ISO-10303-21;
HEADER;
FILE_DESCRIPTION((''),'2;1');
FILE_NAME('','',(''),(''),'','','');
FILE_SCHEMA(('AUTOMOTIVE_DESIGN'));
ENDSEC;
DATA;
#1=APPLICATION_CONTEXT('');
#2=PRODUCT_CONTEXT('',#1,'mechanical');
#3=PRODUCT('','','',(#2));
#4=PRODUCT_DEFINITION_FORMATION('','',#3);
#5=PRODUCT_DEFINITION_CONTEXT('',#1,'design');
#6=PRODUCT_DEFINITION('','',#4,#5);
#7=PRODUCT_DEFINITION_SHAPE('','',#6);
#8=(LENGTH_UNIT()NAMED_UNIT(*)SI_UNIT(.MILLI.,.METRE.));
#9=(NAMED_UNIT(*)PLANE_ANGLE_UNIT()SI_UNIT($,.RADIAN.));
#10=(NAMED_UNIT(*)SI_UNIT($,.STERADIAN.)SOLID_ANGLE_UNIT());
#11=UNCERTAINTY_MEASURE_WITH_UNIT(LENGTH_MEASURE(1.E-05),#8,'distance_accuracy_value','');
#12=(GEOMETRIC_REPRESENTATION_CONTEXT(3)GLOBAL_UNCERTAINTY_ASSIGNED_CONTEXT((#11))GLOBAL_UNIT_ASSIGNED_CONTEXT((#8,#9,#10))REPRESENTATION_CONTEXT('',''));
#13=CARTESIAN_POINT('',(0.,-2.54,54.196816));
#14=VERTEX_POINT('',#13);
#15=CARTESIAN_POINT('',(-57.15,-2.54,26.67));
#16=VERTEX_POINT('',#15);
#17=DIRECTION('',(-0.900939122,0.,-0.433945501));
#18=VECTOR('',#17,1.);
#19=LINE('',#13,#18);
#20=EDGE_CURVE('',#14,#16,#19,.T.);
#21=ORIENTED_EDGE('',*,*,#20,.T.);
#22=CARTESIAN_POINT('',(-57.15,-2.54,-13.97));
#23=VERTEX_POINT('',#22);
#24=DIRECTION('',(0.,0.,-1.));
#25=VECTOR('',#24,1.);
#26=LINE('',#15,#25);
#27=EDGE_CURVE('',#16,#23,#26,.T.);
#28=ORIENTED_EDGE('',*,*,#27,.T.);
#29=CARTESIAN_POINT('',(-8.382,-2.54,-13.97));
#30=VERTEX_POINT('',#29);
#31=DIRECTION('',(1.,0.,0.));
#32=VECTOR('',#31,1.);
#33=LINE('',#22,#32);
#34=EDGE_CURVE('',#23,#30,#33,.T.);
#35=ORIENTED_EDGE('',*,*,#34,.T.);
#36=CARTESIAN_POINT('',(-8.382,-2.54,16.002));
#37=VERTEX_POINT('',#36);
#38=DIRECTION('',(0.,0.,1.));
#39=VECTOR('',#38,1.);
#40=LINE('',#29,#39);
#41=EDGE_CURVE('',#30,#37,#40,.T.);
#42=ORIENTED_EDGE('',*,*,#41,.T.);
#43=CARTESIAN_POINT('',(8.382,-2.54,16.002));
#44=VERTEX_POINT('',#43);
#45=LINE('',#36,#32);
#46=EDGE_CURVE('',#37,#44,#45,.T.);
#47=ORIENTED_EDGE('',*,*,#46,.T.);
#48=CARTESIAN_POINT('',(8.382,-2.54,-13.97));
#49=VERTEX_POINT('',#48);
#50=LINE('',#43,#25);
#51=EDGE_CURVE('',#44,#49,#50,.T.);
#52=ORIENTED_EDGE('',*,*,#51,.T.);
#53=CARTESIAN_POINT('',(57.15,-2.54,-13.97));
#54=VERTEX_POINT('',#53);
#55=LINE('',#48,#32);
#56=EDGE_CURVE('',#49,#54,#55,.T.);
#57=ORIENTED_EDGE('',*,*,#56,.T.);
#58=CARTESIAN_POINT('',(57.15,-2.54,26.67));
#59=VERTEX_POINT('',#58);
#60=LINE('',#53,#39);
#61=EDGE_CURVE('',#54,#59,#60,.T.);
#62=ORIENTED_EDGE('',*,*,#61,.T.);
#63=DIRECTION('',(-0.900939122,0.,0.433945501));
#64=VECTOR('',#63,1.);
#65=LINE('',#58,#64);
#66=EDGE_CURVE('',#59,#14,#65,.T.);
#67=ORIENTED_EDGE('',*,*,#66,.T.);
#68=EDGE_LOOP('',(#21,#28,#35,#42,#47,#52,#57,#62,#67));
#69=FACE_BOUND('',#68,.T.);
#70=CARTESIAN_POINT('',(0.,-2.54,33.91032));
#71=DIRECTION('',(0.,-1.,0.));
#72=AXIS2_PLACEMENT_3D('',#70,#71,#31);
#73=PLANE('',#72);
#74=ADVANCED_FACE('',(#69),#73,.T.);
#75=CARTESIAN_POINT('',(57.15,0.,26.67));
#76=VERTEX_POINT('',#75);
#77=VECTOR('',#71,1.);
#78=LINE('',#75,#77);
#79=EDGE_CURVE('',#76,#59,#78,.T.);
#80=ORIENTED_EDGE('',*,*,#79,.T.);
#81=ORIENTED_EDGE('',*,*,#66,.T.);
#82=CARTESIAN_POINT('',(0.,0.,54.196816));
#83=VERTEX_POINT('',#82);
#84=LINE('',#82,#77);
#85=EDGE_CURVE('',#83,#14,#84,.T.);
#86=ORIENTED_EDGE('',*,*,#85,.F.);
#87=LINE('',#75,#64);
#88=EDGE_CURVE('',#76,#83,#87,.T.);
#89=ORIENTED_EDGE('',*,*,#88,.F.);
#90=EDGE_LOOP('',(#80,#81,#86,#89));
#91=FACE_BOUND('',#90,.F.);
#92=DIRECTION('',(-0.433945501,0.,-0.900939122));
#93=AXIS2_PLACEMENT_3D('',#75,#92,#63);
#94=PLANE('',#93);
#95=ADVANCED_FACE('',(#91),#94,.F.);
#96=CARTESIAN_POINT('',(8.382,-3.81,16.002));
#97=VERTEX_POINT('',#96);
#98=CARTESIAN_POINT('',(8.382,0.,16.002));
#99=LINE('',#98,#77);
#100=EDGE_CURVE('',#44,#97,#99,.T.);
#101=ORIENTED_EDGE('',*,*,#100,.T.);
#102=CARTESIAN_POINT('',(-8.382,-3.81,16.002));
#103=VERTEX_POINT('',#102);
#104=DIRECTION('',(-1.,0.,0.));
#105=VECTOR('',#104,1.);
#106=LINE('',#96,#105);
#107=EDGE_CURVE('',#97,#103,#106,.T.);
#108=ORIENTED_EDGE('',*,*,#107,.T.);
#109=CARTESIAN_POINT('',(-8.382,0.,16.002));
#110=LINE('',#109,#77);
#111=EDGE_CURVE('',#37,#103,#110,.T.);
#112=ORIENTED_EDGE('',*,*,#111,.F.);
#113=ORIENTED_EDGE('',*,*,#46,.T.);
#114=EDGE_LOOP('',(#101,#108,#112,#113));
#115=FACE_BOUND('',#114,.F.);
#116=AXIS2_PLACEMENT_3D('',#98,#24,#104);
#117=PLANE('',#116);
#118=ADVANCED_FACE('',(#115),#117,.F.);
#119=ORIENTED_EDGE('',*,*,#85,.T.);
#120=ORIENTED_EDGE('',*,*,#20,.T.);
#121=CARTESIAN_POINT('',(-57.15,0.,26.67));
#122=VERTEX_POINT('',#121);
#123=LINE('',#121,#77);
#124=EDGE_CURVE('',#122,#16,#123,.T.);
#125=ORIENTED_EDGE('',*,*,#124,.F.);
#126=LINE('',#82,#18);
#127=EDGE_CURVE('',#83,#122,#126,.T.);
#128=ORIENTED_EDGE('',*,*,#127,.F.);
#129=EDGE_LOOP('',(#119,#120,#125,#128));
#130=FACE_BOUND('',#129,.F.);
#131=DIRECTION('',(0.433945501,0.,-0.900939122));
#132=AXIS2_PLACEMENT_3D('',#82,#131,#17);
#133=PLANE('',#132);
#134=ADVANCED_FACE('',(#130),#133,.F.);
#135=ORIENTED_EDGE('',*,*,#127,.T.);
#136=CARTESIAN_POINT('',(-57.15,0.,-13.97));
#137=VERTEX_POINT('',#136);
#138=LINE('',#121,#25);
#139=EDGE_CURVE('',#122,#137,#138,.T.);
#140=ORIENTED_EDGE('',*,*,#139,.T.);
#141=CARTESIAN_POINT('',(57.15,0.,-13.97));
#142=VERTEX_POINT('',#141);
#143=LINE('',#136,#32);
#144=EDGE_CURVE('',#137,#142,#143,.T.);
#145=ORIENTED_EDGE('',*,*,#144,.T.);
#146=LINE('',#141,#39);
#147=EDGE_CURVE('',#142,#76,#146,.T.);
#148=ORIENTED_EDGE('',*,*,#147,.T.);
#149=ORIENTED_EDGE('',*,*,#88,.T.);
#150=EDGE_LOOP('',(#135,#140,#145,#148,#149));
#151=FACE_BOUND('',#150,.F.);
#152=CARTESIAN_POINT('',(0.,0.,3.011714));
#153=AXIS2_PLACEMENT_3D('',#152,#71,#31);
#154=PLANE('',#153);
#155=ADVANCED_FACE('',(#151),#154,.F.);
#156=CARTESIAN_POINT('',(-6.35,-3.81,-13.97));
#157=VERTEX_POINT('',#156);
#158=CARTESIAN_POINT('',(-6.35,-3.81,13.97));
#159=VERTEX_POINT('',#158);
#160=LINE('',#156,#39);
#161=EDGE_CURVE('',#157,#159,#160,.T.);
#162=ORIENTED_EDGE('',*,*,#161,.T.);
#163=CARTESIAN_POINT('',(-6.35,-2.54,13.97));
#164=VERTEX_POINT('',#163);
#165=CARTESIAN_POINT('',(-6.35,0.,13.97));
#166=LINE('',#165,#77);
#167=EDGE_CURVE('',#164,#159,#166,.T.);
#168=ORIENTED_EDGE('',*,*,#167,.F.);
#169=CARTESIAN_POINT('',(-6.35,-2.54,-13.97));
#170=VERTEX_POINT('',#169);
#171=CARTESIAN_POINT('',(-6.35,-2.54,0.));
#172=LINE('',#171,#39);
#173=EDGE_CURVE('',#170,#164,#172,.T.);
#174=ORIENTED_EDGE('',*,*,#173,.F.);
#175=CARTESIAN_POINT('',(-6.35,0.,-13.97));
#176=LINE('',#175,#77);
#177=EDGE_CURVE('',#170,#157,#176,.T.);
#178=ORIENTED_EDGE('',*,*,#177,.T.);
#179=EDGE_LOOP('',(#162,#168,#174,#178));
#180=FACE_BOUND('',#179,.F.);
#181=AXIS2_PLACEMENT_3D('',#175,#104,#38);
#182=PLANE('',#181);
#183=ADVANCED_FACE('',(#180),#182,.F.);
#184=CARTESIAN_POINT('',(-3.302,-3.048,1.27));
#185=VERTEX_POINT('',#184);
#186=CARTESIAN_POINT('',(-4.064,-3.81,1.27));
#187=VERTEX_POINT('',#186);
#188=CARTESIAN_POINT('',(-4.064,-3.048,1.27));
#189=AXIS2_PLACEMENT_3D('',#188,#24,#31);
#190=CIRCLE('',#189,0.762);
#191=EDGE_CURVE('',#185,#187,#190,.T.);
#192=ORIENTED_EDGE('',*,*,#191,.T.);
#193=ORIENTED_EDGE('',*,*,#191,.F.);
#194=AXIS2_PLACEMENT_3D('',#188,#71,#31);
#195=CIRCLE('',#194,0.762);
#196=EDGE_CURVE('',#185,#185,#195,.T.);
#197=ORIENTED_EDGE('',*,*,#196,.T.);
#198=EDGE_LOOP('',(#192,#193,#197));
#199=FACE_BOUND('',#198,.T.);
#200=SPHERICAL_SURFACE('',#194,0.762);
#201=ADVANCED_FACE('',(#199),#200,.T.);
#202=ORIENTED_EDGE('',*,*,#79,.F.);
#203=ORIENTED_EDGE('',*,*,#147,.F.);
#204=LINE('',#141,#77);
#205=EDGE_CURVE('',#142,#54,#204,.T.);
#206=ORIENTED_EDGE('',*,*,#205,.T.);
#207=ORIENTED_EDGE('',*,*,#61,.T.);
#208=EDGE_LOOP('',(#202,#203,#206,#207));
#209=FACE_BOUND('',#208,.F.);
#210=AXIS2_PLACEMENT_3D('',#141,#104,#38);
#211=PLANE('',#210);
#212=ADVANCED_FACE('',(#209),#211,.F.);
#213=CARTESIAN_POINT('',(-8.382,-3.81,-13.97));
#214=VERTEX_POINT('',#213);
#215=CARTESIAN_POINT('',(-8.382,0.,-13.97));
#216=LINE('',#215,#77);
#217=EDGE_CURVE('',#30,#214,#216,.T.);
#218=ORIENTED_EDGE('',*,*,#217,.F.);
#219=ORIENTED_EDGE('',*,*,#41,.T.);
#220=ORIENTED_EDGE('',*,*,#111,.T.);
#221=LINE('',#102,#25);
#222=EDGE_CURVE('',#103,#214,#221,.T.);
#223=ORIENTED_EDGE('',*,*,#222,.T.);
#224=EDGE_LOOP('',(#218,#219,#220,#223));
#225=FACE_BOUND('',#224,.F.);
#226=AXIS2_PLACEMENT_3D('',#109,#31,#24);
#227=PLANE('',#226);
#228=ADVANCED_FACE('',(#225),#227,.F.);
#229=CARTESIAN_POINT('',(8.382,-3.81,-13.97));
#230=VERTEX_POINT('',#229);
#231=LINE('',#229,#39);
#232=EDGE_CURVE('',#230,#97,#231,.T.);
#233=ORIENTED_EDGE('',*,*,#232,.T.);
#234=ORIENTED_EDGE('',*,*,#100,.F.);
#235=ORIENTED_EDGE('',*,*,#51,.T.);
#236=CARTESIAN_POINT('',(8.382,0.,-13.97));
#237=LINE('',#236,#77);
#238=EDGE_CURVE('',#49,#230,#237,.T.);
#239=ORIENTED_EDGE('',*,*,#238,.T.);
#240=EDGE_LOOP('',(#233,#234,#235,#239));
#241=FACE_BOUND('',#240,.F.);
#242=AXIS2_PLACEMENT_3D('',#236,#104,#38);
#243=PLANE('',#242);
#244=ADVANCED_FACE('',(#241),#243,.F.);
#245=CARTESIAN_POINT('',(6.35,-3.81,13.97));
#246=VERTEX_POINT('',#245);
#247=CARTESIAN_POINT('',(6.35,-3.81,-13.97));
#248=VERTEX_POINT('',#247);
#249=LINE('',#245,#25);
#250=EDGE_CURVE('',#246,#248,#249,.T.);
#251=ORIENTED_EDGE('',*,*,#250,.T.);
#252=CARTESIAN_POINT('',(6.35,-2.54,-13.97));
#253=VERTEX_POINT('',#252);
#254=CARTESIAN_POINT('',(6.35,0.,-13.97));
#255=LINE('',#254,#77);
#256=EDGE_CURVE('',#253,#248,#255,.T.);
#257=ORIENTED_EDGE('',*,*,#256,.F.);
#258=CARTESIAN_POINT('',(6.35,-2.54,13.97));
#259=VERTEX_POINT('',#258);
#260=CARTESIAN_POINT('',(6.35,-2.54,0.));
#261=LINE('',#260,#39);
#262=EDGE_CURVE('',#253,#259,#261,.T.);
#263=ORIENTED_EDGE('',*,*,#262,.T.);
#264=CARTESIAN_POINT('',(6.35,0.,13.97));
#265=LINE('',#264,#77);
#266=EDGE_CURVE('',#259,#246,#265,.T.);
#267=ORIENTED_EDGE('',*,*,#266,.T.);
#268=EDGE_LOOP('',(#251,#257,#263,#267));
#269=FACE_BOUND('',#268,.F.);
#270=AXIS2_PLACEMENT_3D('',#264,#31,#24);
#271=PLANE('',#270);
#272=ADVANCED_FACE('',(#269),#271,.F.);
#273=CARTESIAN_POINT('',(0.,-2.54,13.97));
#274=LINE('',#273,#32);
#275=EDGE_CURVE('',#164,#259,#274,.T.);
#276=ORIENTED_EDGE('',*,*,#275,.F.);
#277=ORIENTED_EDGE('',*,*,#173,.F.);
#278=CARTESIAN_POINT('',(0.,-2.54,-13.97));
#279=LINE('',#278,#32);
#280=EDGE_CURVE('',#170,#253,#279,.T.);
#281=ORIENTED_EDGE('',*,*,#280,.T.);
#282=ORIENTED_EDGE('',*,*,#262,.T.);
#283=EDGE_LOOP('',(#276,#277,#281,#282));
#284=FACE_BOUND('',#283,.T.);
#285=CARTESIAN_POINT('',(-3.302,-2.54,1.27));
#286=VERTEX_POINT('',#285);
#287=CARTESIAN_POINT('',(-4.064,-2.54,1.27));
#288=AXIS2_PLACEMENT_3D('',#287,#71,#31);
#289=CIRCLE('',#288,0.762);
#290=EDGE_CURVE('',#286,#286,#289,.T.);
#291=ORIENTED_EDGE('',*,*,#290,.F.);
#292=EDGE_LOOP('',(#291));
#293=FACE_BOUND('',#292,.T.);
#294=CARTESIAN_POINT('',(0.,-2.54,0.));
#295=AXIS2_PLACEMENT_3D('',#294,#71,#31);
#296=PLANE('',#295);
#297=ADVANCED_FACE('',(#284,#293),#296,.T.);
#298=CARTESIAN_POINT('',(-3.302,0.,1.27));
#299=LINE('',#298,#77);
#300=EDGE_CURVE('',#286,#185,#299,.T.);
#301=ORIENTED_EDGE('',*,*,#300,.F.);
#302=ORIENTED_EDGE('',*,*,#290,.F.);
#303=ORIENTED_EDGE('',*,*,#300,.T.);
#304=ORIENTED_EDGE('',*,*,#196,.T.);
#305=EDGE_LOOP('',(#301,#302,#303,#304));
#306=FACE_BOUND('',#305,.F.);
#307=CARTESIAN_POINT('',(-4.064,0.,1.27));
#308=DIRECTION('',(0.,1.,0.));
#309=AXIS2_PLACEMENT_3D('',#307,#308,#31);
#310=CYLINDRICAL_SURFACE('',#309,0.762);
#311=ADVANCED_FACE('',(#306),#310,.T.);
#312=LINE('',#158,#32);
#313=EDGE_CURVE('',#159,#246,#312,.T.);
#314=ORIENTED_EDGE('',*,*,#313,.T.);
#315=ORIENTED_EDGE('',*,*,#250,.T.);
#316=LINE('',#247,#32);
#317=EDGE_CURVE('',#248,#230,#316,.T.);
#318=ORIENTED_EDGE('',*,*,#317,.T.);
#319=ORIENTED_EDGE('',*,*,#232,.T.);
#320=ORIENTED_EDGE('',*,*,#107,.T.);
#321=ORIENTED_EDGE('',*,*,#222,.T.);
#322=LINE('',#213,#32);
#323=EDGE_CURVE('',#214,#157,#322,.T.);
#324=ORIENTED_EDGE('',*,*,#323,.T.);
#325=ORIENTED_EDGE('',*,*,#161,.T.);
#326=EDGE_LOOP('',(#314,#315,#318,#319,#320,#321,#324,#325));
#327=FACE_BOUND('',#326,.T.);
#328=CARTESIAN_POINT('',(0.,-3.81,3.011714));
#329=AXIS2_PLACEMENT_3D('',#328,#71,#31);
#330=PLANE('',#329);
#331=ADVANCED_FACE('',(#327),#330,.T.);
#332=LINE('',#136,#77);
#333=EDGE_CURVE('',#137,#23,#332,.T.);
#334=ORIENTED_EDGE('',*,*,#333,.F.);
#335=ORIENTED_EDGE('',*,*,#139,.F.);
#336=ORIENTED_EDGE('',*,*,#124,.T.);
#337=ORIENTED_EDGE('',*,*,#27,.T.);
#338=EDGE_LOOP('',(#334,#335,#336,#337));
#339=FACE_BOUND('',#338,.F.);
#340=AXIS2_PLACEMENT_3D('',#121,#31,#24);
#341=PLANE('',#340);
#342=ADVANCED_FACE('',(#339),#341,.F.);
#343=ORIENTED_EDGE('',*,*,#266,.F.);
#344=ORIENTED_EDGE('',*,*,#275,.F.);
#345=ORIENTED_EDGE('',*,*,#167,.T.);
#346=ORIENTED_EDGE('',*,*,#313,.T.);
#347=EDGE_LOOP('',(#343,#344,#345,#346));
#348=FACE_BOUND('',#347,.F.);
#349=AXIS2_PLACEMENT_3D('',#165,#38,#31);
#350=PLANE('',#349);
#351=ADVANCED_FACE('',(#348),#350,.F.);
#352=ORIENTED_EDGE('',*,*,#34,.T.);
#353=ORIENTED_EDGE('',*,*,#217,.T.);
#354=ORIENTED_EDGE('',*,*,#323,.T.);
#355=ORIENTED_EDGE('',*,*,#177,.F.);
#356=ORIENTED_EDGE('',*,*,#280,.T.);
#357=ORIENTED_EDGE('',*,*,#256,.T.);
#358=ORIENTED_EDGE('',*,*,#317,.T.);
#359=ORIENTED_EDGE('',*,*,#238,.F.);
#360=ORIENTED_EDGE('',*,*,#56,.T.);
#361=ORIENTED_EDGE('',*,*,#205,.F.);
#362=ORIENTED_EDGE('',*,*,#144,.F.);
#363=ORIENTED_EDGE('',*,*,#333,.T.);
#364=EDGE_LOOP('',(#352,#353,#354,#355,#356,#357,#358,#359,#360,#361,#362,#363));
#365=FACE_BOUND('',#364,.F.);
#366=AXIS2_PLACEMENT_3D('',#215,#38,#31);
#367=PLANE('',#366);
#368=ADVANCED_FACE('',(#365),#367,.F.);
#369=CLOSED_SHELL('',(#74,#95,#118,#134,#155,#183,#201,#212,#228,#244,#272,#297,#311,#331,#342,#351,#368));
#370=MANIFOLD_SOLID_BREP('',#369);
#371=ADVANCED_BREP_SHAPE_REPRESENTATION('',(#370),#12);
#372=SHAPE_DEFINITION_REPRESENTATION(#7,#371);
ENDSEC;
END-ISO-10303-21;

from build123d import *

# Parameters (mm, degrees)
F1_DEPTH = 2.54
F0_W     = 12.7
F0_H     = 27.94
F0_R     = 0.762
F2_DEPTH = 3.81
F3_DEPTH = 3.81
F4_R     = 0.762


# Not quite as in the source:
# - a feature names something its author has since deleted; it is built from what else it names


with BuildPart() as f1:
    # F0 (on Front) → F1 (new body)
    with BuildSketch(Plane.XZ):
        Polygon((0, 54.1968159378), (-57.15, 26.67), (57.15, 26.67), align=None)
        Polygon((-57.15, -13.97), (-8.382, -13.97), (-8.382, 16.002), (8.382, 16.002), (8.382, -13.97), (57.15, -13.97), (57.15, 26.67), (-57.15, 26.67), align=None)
    extrude(amount=F1_DEPTH)



with BuildPart() as f1b:
    # F0 (on Front) → F1, piece 2 (new body)
    with BuildSketch(Plane.XZ):
        Rectangle(F0_W, F0_H)
        with Locations((-4.064, 1.27)):
            Circle(F0_R, mode=Mode.SUBTRACT)
    extrude(amount=F1_DEPTH)


with BuildPart() as f1_1:
    add(f1.part)

    add(f1b.part)  # F2 merges F1b
    # F0 (on Front) → F2 (join)
    with BuildSketch(Plane.XZ):
        Polygon((-6.35, -13.97), (-6.35, 13.97), (6.35, 13.97), (6.35, -13.97), (8.382, -13.97), (8.382, 16.002), (-8.382, 16.002), (-8.382, -13.97), align=None)
    extrude(amount=F2_DEPTH)

    # F0 (on Front) → F3 (join)
    with BuildSketch(Plane.XZ):
        with Locations((-4.064, 1.27)):
            Circle(F0_R)
    extrude(amount=F3_DEPTH)

    # F4
    f4_edges = [f1_1.edges().sort_by_distance(p)[0] for p in [
        (-4.826, -3.81, 1.27),
    ]]
    fillet(f4_edges, radius=F4_R)


solid = f1_1.part
